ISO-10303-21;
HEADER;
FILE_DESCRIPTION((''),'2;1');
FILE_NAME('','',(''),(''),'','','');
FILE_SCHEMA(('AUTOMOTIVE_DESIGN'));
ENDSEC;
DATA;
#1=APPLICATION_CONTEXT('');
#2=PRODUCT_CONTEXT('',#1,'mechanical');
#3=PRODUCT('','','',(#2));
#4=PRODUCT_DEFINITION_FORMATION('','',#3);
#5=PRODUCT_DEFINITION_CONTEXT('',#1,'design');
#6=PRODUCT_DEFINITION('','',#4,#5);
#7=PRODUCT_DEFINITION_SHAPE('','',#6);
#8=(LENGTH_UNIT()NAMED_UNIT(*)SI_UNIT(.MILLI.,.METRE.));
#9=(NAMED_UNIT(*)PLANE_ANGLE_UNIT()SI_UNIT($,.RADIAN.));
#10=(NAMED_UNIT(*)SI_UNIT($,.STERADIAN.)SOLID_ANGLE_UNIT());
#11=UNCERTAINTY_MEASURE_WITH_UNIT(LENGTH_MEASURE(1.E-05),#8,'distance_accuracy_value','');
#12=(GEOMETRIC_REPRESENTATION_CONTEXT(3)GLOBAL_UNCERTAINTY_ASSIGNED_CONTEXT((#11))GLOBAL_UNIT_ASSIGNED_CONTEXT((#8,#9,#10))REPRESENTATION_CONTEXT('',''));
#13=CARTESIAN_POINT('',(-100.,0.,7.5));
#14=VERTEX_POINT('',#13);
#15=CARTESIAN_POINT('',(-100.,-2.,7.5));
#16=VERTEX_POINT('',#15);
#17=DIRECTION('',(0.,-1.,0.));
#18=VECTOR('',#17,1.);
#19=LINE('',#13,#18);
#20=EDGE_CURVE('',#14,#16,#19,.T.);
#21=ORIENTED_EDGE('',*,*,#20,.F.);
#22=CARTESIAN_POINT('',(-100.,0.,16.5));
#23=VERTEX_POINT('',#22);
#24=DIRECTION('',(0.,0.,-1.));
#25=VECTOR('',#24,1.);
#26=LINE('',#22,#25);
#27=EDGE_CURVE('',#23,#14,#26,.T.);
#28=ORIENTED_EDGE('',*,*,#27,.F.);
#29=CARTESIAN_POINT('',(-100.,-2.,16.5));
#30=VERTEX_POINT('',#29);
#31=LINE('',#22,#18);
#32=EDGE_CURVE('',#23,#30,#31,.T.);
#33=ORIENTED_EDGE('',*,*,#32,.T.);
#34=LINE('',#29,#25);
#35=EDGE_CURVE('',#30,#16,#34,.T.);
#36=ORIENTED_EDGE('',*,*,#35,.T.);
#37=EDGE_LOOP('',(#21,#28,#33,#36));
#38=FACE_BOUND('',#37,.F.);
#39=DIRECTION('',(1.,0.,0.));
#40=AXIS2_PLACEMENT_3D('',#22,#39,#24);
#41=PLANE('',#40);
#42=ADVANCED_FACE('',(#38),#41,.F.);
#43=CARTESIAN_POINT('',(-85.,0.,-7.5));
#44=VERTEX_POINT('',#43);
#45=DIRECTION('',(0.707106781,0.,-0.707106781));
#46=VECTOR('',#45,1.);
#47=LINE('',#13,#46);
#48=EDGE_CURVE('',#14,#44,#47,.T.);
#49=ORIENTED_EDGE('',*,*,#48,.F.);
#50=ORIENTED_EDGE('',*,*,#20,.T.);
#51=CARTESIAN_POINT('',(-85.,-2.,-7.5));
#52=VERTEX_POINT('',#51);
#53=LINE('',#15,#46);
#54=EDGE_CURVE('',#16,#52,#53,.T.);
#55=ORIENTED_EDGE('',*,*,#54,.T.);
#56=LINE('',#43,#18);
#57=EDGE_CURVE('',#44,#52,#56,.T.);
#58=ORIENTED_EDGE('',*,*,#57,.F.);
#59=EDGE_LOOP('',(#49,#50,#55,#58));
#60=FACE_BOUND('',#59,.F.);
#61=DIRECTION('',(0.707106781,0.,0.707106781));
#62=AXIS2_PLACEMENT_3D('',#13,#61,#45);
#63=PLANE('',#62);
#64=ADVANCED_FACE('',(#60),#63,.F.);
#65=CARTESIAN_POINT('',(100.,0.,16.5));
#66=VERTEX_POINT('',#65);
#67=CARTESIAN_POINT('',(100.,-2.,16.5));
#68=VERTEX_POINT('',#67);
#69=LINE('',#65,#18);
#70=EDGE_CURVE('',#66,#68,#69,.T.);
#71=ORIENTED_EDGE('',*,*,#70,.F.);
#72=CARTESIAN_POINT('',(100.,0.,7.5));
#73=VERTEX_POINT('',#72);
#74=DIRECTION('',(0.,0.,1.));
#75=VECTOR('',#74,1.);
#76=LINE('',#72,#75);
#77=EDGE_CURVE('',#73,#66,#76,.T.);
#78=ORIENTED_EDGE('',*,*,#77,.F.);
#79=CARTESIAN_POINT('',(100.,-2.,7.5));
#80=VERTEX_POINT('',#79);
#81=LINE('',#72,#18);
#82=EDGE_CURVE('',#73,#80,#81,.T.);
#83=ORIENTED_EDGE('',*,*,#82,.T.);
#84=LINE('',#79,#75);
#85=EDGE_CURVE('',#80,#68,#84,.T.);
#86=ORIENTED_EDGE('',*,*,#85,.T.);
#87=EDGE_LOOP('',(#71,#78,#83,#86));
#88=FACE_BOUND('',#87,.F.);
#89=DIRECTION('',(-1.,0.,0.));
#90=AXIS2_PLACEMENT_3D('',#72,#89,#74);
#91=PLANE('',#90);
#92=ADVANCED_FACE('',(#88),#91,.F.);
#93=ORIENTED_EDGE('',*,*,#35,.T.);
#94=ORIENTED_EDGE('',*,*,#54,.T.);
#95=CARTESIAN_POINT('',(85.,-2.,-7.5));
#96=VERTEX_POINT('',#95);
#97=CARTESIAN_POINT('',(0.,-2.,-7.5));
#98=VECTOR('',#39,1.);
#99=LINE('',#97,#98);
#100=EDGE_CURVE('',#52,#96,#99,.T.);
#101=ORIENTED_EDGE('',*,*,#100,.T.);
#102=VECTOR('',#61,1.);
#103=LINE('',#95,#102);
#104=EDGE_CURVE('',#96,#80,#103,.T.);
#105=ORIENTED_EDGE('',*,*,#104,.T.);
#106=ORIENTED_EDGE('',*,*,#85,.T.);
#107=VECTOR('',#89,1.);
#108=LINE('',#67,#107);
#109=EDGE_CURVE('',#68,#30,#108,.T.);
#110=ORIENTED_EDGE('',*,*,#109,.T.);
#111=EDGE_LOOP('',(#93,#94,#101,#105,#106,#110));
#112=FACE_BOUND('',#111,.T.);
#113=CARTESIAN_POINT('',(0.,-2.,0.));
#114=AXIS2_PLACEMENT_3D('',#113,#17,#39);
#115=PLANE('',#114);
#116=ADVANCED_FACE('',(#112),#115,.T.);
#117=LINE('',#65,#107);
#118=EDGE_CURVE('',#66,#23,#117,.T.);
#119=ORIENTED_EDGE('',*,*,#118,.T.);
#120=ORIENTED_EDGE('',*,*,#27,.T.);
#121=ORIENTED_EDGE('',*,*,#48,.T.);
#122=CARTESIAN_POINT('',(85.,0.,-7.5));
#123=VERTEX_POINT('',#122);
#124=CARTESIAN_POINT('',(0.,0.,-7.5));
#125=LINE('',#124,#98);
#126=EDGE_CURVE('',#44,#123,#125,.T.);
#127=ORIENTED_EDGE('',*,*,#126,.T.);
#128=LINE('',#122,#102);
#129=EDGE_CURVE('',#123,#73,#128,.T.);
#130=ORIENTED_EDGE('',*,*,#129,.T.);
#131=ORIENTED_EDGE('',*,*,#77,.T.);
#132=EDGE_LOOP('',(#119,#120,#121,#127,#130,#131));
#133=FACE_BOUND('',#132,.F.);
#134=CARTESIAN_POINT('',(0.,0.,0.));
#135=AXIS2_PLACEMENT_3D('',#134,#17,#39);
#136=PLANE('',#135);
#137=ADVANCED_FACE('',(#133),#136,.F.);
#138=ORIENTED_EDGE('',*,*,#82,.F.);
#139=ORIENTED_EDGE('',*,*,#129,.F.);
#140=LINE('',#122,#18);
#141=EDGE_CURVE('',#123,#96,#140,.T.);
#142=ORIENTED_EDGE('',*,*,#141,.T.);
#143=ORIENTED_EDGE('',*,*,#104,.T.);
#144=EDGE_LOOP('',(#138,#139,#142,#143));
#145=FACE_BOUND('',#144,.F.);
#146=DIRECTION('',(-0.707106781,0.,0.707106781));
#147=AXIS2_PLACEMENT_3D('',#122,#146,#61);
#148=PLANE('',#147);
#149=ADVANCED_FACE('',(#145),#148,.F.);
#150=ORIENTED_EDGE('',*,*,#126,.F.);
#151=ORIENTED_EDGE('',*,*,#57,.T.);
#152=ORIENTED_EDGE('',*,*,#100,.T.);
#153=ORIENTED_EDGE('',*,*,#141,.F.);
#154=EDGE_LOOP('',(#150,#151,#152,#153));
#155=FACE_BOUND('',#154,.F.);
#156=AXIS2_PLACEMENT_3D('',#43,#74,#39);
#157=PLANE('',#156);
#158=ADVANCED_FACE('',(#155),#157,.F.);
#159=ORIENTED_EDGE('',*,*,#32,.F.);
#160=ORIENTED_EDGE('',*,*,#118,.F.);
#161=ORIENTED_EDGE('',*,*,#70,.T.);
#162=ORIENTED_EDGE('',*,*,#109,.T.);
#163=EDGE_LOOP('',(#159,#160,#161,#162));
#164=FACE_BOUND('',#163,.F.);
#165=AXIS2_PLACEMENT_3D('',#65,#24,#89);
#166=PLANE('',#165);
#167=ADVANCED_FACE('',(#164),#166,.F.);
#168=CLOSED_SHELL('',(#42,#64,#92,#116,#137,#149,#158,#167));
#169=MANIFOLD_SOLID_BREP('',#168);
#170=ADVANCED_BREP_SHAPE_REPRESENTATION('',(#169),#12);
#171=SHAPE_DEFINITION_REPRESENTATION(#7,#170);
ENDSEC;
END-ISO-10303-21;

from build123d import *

# Parameters (mm, degrees)
F0_W     = 170
F0_H     = 15
F1_DEPTH = 2


# Not quite as in the source:
# - a feature names something its author has since deleted; it is built from what else it names


with BuildPart() as f1:
    # F0 (on Front) → F1 (new body)
    with BuildSketch(Plane.XZ):
        Rectangle(F0_W, F0_H)
        Polygon((-100, 7.5), (-85, -7.5), (-85, 7.5), align=None)
        Polygon((85, 7.5), (85, -7.5), (100, 7.5), align=None)
        Polygon((-85, 7.5), (85, 7.5), (100, 7.5), (100, 16.5), (-100, 16.5), (-100, 7.5), align=None)
    extrude(amount=F1_DEPTH)


solid = f1.part
